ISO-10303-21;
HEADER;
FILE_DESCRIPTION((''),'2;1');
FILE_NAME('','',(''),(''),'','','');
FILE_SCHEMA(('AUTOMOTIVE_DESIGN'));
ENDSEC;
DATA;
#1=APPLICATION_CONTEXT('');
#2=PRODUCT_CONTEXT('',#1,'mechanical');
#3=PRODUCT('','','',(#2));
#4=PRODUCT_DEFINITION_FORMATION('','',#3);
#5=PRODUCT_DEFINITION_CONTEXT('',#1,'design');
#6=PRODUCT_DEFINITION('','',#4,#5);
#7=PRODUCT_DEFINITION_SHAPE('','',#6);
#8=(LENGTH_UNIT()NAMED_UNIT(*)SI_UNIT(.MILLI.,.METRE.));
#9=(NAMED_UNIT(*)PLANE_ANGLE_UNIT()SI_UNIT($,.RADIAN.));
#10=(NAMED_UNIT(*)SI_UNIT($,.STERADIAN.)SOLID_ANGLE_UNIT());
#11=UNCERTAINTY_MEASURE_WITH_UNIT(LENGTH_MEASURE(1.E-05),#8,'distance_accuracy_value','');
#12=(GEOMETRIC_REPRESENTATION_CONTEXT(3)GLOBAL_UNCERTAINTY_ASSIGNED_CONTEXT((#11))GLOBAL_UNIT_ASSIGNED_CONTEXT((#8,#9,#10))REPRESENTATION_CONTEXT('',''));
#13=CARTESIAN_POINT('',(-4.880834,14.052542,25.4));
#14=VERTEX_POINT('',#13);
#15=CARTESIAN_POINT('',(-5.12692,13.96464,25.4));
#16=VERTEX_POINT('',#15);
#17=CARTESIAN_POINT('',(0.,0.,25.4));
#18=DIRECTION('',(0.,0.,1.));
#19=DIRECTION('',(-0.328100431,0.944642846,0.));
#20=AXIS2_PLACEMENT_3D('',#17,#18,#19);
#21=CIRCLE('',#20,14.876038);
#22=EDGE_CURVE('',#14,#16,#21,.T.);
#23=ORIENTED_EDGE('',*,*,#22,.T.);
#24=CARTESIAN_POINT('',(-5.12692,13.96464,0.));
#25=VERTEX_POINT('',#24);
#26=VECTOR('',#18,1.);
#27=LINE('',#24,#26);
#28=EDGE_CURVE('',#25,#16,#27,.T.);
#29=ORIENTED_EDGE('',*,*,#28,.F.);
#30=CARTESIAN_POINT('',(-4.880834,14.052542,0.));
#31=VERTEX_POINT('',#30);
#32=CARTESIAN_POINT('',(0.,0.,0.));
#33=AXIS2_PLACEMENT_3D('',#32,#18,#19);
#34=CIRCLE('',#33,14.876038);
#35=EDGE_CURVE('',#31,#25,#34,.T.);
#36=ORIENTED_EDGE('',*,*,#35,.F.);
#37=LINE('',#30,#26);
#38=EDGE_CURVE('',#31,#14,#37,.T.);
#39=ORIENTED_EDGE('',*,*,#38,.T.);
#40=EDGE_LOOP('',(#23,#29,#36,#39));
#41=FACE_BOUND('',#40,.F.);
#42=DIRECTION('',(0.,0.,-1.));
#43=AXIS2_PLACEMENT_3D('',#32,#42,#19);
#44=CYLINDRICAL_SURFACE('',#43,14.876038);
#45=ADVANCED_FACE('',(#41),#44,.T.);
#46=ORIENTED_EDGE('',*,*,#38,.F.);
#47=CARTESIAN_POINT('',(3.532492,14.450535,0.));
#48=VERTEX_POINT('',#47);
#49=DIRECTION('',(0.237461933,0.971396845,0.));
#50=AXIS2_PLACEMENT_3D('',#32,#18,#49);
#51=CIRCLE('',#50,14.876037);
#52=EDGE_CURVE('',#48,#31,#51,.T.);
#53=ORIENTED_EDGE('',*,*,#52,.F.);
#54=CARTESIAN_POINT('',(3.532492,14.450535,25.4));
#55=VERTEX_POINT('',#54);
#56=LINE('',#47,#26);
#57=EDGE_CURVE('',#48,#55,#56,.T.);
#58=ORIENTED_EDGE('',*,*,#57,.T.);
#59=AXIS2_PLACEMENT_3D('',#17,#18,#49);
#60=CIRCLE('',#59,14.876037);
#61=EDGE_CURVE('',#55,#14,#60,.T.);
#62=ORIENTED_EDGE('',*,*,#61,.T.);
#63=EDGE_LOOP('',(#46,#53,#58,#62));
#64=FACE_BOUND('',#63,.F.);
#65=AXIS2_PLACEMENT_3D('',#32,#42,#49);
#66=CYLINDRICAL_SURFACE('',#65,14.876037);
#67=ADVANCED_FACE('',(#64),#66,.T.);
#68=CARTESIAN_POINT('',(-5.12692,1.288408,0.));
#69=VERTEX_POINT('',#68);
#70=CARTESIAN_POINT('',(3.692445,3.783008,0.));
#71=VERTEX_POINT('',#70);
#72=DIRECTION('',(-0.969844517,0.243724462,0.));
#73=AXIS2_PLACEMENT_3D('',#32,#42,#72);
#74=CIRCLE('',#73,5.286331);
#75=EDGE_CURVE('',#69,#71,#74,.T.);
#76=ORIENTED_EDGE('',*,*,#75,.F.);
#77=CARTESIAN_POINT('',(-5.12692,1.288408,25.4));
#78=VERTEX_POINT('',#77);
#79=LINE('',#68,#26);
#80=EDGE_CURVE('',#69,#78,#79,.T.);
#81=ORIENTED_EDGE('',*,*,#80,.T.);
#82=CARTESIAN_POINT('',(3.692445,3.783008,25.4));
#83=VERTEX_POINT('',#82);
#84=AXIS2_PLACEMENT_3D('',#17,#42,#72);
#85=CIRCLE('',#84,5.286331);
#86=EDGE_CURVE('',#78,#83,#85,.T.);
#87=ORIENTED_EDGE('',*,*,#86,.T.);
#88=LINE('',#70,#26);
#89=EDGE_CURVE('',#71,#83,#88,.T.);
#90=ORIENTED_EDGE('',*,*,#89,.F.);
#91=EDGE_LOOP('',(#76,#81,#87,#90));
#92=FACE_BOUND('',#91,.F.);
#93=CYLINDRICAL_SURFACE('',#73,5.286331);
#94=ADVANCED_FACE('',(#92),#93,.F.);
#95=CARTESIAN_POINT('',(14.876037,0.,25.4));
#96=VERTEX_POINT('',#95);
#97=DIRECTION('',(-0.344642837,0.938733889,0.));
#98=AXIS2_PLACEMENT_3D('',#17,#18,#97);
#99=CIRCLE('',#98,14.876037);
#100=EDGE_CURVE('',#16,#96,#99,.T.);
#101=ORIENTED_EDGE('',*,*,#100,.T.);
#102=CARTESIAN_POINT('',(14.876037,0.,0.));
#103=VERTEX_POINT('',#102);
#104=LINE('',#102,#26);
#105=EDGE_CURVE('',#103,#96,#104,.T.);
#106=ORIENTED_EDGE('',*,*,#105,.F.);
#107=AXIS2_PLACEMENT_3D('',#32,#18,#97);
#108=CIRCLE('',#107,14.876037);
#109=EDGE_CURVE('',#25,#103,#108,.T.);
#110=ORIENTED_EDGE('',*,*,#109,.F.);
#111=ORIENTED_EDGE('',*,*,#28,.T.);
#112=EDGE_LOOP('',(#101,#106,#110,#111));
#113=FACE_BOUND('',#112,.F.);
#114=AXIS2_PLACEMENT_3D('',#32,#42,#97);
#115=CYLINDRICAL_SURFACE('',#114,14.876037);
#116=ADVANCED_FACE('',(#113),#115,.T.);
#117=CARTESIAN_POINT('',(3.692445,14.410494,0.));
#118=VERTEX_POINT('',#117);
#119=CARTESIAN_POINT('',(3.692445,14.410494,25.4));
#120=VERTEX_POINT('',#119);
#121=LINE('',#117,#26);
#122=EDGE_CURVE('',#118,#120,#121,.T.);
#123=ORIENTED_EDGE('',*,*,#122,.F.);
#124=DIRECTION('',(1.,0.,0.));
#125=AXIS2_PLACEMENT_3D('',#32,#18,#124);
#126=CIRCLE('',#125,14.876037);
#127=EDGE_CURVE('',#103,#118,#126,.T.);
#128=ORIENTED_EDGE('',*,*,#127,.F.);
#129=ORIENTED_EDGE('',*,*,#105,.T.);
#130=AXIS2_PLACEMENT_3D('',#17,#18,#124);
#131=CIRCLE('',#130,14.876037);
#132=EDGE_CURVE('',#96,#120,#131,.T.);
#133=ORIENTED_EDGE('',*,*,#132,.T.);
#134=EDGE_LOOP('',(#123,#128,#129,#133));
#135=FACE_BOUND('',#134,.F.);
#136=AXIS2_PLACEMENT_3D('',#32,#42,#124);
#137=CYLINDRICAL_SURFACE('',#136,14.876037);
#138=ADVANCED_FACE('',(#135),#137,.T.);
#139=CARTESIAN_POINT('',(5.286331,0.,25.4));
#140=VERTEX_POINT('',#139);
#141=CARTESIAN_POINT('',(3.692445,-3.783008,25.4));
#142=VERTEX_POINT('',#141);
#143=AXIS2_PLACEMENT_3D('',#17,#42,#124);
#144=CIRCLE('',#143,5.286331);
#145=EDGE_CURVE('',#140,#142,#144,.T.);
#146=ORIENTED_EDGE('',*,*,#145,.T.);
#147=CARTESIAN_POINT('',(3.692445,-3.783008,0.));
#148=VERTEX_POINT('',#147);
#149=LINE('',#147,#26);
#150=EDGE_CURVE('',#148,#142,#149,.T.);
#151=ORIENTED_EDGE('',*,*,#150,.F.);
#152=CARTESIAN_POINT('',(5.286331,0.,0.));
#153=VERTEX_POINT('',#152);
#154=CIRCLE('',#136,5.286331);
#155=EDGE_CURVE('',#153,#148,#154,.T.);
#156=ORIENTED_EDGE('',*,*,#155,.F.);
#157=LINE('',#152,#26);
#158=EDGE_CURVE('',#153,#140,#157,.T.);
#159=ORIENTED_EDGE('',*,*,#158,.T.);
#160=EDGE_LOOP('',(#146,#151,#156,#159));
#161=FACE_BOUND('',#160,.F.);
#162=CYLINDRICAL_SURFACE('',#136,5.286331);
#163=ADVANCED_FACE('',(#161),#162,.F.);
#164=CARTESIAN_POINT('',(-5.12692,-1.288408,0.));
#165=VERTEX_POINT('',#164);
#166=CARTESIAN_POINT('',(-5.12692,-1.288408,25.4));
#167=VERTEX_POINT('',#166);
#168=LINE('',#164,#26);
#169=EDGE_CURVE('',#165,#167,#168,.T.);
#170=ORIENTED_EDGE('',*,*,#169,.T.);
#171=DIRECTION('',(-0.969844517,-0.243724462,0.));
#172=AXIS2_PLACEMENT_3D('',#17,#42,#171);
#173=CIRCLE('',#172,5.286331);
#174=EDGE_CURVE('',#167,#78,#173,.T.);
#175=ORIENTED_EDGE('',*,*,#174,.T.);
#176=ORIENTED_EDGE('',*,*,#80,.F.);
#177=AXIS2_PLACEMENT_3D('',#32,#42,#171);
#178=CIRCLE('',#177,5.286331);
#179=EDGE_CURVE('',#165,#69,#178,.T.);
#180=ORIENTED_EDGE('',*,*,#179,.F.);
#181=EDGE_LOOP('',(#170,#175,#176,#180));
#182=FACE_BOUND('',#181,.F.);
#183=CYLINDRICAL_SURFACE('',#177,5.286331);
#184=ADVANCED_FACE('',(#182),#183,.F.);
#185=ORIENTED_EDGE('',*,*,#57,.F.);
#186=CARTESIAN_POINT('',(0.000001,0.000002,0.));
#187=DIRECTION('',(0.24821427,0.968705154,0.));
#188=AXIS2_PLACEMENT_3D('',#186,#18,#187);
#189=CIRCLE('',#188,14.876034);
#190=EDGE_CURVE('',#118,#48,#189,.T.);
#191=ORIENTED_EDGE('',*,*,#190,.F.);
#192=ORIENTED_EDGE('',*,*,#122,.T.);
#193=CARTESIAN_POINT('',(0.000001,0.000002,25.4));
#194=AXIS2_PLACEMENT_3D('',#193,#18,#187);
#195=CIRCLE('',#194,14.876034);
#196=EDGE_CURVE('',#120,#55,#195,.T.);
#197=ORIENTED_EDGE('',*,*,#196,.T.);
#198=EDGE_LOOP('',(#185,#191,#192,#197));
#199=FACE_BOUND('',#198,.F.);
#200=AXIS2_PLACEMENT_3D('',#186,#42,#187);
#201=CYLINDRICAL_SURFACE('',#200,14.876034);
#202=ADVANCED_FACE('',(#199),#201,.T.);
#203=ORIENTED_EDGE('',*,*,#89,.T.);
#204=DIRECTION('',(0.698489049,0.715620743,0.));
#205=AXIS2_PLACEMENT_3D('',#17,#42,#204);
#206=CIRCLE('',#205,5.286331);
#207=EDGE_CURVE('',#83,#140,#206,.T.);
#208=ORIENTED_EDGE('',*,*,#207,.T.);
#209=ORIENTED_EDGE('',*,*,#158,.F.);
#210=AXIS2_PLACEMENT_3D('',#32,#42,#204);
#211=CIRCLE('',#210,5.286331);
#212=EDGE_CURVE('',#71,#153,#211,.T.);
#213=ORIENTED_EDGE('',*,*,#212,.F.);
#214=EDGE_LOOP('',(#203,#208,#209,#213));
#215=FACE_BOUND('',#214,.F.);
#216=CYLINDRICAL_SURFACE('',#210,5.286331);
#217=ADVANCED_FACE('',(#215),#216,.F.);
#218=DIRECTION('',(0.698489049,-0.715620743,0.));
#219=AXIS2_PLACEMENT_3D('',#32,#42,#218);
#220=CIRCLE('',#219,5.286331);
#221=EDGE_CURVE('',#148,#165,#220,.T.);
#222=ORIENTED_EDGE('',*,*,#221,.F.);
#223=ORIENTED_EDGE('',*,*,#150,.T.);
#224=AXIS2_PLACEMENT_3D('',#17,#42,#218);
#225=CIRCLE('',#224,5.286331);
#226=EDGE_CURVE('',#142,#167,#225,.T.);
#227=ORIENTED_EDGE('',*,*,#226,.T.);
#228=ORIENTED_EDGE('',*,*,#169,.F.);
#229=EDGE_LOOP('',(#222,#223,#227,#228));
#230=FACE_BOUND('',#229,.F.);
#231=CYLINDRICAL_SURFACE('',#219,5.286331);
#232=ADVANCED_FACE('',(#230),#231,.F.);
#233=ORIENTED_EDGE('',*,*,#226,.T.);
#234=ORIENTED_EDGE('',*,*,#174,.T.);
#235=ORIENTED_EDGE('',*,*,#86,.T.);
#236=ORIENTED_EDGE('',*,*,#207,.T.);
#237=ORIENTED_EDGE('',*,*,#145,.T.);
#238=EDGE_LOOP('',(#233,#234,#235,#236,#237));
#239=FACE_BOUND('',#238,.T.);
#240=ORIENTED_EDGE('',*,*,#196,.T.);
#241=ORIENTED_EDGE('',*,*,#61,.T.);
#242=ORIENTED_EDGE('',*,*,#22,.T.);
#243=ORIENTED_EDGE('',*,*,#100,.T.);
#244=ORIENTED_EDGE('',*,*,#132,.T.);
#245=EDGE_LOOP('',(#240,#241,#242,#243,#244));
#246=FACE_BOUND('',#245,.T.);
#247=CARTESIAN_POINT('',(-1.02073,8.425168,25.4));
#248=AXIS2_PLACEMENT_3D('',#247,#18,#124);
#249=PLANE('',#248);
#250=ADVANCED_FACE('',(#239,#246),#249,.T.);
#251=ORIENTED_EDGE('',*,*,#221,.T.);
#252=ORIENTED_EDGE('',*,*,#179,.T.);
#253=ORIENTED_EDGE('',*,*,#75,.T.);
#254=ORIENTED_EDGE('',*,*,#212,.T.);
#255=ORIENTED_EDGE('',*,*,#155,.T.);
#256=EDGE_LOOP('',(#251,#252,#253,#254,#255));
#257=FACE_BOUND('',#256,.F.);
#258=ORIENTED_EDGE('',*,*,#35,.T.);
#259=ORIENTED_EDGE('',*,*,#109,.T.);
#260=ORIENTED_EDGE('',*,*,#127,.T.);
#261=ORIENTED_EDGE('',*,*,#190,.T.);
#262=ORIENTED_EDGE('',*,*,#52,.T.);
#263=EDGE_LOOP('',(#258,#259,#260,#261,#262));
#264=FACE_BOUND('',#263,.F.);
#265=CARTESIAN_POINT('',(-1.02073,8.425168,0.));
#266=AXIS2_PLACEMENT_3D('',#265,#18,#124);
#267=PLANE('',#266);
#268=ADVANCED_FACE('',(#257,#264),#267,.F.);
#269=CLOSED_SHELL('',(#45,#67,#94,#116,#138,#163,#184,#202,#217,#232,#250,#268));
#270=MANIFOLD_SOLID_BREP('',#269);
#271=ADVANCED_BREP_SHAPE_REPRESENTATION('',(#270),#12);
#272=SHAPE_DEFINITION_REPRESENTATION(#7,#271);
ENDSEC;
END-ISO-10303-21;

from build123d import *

# Parameters (mm, degrees)
F2_DEPTH = 25.4


with BuildPart() as f2:
    # F1 (on face) → F2 (new body)
    with BuildSketch(Plane.XY):
        with BuildLine():
            ThreePointArc((-4.8808341445, 14.0525419265), (-5.004069886, 14.0091313477), (-5.1269195974, 13.9646400592))
            Line((-5.1269195974, 13.9646400592), (-5.1269195974, 1.288408295))
            ThreePointArc((-5.1269195974, 1.288408295), (-1.4388144753, 5.0867586338), (3.6924446467, 3.783008462))
            Line((3.6924446467, 3.783008462), (3.6924446467, 14.4104937137))
            ThreePointArc((3.6924446467, 14.4104937137), (3.6125240495, 14.4307361744), (3.5324924947, 14.450535399))
            Line((3.5324924947, 14.450535399), (3.0549003277, 14.0525419265))
            Line((3.0549003277, 14.0525419265), (-4.8808341445, 14.0525419265))
        make_face()
        with BuildLine():
            Line((-5.1269195974, 1.288408295), (-5.1269195974, 13.9646400592))
            ThreePointArc((-5.1269195974, 13.9646400592), (-8.5155220323, -12.1976375196), (14.8760369905, 0))
            ThreePointArc((14.8760369905, 0), (11.752136395, 9.1205135105), (3.6924446467, 14.4104937137))
            Line((3.6924446467, 14.4104937137), (3.6924446467, 3.783008462))
            ThreePointArc((3.6924446467, 3.783008462), (4.8715904415, 2.0525367386), (5.2863314778, 0))
            ThreePointArc((5.2863314778, 0), (4.8715904415, -2.0525367386), (3.6924446467, -3.783008462))
            Line((3.6924446467, -3.783008462), (3.6924446467, -11.555492878))
            Line((3.6924446467, -11.555492878), (-4.7550187446, -10.9179485589))
            Line((-4.7550187446, -10.9179485589), (-5.1269195974, -10.9179485589))
            Line((-5.1269195974, -10.9179485589), (-5.1269195974, -1.288408295))
            ThreePointArc((-5.1269195974, -1.288408295), (-5.2863314778, 0), (-5.1269195974, 1.288408295))
        make_face()
        with BuildLine():
            ThreePointArc((3.5324924947, 14.450535399), (-0.7029267403, 14.8594202626), (-4.8808341445, 14.0525419265))
            Line((-4.8808341445, 14.0525419265), (3.0549003277, 14.0525419265))
            Line((3.0549003277, 14.0525419265), (3.5324924947, 14.450535399))
        make_face()
        with BuildLine():
            ThreePointArc((3.6924446467, -3.783008462), (-1.4388144753, -5.0867586338), (-5.1269195974, -1.288408295))
            Line((-5.1269195974, -1.288408295), (-5.1269195974, -10.9179485589))
            Line((-5.1269195974, -10.9179485589), (-4.7550187446, -10.9179485589))
            Line((-4.7550187446, -10.9179485589), (3.6924446467, -11.555492878))
            Line((3.6924446467, -11.555492878), (3.6924446467, -3.783008462))
        make_face()
    extrude(amount=F2_DEPTH)


solid = f2.part
